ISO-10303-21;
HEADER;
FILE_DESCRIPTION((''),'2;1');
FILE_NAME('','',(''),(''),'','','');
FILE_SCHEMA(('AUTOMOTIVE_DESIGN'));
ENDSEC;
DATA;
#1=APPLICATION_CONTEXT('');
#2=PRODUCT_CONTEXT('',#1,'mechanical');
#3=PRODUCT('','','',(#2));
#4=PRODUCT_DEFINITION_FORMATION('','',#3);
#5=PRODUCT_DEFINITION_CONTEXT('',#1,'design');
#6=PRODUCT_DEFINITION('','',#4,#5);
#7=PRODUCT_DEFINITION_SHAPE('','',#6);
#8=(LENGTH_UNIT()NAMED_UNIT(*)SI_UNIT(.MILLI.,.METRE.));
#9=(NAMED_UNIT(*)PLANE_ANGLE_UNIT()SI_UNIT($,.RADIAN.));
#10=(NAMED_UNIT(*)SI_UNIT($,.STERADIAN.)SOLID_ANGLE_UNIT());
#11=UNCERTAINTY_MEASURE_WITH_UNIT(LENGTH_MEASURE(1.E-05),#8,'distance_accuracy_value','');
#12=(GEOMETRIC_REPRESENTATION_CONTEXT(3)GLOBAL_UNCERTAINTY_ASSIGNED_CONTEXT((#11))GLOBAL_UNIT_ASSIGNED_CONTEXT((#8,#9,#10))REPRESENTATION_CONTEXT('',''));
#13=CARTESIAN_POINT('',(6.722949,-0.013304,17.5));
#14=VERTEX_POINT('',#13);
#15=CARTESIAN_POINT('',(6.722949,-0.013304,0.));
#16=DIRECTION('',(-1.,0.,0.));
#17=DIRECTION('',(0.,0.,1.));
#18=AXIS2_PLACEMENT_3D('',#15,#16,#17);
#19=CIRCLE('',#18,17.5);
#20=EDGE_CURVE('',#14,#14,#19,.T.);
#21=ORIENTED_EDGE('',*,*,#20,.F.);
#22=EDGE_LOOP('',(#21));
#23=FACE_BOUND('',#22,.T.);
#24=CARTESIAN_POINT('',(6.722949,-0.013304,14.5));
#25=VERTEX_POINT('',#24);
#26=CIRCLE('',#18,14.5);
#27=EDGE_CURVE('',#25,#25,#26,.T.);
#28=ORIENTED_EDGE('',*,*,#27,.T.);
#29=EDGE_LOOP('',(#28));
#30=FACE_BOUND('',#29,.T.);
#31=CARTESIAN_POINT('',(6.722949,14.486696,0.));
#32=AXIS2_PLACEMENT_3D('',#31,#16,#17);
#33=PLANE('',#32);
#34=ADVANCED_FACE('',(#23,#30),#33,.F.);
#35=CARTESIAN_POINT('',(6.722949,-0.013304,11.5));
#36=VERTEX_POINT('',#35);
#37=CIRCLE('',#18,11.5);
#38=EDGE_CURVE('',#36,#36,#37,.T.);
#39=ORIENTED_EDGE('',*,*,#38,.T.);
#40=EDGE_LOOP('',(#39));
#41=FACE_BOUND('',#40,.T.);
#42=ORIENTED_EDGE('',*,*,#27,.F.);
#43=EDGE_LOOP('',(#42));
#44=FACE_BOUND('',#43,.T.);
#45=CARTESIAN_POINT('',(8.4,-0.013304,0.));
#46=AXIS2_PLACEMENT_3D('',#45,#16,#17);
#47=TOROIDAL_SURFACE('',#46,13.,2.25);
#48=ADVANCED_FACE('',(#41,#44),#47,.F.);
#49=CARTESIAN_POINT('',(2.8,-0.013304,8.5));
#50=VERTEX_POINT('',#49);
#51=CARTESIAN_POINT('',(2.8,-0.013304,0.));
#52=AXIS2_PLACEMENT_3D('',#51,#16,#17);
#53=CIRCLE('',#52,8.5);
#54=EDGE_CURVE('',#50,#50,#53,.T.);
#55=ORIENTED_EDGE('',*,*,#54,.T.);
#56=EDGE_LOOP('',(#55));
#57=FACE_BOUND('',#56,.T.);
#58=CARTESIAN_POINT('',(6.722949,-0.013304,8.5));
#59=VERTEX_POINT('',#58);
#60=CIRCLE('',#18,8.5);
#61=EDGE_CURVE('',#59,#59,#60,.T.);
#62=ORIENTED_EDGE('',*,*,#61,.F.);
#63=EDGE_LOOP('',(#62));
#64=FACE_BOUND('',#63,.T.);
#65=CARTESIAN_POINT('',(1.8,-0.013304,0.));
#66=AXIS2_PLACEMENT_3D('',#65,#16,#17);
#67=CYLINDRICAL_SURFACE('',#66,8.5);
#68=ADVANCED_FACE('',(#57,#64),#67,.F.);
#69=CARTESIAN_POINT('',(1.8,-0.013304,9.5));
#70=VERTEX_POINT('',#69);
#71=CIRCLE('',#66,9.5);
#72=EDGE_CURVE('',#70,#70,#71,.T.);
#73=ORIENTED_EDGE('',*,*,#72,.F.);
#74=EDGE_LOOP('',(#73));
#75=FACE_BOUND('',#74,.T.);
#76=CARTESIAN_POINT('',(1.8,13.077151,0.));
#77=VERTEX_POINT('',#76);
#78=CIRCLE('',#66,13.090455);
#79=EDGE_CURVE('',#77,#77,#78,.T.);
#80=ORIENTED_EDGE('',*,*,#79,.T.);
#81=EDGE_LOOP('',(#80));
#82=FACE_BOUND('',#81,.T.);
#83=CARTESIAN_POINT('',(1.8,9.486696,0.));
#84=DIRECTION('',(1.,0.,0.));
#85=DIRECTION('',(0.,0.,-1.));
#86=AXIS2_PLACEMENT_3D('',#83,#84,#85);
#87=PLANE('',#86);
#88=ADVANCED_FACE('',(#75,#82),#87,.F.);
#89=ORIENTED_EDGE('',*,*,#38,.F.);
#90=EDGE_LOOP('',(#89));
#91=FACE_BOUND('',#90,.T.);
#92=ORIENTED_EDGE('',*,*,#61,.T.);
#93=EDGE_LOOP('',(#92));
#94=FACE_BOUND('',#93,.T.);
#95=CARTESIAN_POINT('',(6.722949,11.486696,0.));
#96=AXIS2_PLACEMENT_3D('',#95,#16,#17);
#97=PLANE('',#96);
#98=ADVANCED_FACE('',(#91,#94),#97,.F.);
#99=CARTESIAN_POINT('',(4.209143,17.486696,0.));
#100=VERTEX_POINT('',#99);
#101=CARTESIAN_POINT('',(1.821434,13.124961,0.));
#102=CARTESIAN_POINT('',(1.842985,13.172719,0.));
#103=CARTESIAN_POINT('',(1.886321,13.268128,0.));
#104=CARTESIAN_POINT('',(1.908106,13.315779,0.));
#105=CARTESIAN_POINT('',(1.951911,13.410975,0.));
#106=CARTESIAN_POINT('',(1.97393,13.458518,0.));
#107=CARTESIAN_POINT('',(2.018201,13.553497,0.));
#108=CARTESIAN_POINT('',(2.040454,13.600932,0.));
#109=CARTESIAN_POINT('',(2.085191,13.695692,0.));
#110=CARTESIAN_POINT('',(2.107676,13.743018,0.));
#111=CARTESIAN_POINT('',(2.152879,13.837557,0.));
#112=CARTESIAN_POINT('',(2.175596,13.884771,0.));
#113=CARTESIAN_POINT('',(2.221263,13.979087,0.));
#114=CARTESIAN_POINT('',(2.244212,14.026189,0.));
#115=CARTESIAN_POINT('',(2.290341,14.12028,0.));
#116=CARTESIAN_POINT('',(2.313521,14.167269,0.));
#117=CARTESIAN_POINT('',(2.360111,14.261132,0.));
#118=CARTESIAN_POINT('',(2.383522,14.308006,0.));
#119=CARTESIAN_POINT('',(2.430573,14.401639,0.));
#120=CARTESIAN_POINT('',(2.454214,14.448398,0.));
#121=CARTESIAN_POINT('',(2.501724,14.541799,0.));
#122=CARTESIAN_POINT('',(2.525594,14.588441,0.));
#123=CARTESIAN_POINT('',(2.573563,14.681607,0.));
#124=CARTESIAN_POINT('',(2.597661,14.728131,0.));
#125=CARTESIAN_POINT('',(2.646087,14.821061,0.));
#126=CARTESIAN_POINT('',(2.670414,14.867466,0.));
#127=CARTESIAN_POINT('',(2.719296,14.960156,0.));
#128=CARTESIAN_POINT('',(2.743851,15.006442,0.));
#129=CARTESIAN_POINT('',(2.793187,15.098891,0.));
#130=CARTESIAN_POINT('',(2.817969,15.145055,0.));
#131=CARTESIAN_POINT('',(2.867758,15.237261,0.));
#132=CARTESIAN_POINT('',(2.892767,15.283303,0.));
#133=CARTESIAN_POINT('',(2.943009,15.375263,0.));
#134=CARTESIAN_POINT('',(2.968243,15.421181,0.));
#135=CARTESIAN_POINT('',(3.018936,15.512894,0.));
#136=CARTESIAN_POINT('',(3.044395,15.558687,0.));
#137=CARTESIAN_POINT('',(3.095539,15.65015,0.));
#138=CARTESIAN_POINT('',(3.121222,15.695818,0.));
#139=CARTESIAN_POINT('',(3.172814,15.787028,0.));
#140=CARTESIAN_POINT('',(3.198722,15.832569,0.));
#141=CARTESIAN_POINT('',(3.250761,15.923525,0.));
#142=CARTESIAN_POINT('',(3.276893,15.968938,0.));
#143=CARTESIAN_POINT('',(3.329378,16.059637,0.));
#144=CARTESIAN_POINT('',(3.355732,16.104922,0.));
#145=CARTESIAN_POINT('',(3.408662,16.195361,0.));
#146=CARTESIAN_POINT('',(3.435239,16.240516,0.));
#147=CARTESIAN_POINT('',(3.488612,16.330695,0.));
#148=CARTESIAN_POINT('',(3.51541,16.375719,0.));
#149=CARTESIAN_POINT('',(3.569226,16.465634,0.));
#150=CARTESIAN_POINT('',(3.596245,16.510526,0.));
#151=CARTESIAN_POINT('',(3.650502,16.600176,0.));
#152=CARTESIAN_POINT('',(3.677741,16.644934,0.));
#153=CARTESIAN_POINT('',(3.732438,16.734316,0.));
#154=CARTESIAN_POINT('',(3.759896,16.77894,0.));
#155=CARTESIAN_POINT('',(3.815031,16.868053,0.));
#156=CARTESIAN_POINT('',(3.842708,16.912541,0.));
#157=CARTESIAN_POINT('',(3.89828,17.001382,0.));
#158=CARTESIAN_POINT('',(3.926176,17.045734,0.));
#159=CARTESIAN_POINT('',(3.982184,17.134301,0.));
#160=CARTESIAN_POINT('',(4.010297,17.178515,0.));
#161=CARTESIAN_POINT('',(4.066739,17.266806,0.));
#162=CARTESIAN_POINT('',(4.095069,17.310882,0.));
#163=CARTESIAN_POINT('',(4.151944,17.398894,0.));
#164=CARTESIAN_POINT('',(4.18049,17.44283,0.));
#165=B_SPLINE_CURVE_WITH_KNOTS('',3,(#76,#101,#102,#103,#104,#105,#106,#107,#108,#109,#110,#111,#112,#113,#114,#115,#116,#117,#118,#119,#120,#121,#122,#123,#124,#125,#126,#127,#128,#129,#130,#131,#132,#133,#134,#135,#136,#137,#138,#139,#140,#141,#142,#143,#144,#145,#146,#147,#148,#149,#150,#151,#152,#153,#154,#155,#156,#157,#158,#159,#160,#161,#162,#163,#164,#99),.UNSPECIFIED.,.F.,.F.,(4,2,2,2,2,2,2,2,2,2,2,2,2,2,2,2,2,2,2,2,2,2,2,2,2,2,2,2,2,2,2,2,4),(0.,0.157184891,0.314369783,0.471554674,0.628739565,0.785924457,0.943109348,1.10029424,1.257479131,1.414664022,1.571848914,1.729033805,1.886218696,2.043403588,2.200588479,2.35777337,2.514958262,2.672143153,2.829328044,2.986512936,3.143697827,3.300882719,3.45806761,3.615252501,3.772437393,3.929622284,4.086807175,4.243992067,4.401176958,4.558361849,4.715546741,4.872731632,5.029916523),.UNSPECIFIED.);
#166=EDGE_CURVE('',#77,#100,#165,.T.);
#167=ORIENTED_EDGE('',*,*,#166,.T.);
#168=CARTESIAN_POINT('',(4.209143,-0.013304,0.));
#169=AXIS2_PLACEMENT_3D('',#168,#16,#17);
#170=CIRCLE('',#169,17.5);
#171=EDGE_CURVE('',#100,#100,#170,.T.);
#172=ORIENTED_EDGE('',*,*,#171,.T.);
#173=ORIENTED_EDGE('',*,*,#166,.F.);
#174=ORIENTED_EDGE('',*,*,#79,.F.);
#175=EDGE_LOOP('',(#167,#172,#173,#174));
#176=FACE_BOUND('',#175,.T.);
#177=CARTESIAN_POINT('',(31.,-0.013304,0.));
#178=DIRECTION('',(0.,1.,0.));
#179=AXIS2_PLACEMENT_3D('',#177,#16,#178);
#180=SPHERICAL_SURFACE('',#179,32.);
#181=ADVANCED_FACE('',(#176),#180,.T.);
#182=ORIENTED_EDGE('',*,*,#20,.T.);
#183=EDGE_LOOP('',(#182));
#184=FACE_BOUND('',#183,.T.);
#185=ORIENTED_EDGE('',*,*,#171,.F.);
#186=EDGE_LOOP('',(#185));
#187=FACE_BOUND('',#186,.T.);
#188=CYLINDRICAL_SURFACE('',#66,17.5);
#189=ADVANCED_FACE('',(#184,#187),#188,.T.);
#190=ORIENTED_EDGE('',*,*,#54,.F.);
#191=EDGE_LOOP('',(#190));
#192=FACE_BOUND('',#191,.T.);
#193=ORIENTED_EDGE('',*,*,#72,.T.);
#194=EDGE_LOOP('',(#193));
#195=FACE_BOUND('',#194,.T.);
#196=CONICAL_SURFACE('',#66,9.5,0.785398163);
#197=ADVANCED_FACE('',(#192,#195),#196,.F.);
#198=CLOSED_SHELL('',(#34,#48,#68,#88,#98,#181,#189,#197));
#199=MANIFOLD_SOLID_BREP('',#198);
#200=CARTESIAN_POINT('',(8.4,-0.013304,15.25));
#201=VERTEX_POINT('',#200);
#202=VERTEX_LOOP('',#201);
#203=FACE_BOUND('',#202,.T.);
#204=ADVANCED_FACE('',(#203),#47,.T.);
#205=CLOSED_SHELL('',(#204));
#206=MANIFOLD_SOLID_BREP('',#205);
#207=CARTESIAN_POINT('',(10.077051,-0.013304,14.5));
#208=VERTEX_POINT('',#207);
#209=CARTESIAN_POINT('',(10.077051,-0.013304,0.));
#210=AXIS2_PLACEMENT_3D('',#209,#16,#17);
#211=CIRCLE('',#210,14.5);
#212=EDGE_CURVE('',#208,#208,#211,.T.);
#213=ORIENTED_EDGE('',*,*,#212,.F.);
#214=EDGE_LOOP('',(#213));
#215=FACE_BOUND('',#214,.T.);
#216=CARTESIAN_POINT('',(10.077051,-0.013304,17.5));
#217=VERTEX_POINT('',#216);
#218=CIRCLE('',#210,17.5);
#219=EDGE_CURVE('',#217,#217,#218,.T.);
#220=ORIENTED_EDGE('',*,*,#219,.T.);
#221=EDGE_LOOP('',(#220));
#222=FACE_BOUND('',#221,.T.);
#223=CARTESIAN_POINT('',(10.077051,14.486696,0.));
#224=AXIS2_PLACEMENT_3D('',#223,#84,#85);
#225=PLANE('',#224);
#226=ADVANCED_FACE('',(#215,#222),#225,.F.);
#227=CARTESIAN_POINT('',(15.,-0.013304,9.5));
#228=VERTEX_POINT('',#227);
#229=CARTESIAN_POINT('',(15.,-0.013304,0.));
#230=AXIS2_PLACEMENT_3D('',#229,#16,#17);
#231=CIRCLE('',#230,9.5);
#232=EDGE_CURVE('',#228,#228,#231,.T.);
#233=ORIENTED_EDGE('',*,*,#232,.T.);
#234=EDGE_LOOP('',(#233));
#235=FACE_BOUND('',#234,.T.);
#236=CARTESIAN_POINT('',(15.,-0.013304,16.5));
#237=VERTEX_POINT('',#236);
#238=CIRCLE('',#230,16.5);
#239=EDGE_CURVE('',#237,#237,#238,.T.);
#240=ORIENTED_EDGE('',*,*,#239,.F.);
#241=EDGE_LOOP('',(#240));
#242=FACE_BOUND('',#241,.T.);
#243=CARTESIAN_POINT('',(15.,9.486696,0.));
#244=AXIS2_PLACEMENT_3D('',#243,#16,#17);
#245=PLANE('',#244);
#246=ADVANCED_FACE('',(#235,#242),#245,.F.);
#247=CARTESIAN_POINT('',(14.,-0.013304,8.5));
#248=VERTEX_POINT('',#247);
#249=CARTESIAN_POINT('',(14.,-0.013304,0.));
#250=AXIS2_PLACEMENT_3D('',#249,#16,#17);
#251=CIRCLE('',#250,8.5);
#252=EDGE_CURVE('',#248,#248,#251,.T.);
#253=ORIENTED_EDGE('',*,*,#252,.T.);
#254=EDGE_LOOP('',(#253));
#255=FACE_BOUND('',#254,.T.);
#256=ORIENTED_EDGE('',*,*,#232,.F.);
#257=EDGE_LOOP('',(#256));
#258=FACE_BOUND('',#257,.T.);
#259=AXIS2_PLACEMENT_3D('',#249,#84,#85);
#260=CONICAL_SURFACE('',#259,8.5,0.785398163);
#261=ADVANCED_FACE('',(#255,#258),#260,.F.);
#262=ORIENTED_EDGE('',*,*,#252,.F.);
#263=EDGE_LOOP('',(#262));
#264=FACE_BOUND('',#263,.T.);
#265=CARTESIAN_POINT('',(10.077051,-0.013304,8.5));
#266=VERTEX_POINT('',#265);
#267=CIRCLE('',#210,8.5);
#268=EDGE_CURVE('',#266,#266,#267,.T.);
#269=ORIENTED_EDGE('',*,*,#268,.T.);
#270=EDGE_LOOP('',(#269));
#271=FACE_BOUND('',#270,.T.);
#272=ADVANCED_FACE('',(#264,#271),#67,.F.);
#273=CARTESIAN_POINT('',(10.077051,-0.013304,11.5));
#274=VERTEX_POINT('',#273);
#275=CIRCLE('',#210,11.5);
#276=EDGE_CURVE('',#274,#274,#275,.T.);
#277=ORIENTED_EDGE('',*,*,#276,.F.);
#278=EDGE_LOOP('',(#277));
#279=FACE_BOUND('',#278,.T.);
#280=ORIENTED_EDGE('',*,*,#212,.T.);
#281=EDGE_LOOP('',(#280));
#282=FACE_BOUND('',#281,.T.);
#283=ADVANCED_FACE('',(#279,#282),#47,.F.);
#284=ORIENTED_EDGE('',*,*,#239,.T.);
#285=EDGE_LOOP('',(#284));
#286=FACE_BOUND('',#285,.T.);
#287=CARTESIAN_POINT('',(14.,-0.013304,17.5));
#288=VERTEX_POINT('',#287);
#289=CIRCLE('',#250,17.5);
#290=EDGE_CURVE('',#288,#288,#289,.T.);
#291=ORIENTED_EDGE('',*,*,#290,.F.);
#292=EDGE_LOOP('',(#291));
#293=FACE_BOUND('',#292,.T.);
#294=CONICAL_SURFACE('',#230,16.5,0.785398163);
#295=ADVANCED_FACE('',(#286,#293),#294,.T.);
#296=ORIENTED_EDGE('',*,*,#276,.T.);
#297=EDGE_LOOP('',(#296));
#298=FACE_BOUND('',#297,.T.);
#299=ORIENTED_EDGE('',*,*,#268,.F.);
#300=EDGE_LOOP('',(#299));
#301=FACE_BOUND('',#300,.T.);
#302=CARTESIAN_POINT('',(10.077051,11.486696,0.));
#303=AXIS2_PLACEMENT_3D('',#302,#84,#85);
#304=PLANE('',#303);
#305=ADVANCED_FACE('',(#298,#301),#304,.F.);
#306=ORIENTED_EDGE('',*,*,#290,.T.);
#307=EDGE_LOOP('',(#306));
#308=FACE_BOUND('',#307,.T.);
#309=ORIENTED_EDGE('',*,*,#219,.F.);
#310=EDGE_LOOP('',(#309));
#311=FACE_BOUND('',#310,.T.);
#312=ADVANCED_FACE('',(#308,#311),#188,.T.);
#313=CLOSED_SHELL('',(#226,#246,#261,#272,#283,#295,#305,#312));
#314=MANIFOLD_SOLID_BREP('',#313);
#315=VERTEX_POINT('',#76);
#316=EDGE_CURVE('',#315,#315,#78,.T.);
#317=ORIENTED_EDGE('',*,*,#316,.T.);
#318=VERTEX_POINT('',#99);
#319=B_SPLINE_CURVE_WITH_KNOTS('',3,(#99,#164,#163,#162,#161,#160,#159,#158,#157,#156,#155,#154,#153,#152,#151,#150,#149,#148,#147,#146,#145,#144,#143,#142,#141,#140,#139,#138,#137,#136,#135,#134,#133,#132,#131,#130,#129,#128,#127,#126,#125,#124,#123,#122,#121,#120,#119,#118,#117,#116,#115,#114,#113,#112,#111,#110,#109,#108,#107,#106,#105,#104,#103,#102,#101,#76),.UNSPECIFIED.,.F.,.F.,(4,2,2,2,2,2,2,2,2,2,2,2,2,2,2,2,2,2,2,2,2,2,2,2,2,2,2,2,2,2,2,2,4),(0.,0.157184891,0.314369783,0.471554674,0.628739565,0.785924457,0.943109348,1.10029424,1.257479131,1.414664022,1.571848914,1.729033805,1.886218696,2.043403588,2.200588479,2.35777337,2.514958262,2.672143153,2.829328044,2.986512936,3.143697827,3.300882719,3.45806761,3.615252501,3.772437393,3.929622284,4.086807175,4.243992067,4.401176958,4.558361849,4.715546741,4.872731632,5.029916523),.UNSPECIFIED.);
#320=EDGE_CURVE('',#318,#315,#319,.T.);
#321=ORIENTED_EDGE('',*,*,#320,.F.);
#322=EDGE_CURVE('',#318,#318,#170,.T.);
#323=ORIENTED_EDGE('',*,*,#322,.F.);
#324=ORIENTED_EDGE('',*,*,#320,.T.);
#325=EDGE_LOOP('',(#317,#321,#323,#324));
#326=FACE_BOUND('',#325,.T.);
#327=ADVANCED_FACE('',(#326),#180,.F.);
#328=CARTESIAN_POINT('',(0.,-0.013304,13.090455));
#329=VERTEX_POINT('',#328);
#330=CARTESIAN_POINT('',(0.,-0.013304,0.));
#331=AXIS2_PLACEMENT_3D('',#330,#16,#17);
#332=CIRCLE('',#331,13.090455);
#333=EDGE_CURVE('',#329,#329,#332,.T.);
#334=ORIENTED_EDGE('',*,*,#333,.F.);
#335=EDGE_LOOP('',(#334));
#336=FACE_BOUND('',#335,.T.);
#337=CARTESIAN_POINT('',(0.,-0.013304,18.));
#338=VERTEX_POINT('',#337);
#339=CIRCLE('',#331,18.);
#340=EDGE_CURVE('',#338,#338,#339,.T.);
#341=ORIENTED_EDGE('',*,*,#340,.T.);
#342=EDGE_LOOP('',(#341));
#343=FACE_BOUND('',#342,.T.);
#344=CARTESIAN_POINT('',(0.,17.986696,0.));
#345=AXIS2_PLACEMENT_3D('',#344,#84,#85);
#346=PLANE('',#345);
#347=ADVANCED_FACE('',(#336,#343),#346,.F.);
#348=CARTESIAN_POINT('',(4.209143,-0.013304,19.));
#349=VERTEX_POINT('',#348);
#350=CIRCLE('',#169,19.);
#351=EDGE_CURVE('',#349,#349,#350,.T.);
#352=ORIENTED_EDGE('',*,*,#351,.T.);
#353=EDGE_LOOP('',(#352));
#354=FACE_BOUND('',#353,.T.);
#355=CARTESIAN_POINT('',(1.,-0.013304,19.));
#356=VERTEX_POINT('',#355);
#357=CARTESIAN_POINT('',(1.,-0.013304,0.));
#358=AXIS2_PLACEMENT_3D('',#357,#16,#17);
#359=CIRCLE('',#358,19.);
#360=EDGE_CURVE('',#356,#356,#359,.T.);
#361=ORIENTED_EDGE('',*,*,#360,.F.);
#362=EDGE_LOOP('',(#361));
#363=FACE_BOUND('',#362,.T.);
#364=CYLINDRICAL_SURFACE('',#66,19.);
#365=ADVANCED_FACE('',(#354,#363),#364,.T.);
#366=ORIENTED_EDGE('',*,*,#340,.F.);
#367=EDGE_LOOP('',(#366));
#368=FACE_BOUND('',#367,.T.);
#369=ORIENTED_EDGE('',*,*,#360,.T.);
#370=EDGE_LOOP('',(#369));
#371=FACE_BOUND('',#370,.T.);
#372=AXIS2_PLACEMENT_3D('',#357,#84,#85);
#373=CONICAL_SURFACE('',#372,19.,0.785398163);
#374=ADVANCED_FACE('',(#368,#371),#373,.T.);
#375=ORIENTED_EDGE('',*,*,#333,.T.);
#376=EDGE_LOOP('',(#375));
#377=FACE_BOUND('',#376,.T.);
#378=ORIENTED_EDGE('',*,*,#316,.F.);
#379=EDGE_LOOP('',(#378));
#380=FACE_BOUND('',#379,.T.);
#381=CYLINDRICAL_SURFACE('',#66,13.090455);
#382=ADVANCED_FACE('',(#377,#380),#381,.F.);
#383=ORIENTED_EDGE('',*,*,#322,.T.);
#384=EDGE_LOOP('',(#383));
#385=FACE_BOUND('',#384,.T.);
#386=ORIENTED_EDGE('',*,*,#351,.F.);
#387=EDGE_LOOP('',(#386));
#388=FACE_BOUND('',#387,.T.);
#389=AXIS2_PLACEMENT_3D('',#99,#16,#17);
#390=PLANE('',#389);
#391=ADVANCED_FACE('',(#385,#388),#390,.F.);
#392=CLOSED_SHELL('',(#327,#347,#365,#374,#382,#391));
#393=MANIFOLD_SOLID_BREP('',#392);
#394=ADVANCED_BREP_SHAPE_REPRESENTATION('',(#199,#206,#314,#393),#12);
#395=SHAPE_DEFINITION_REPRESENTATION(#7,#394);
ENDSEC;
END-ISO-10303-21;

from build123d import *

# Parameters (mm, degrees)
REVOLVE_3_OUTLINE_R = 2.25


# Read off the part's stored shape, not the designer's step: Повернуть3
with BuildPart() as part:
    # Эскиз3 → Повернуть1 (revolve)
    with BuildSketch(Plane.XY, mode=Mode.PRIVATE) as revolve_1_sk:
        with BuildLine():
            Line((4.209143351, 17.486695989), (4.209143351, 18.986695989))
            Line((4.209143351, 18.986695989), (1, 18.986695989))
            Line((1, 18.986695989), (0, 17.986695989))
            Line((0, 17.986695989), (0, 13.077150527))
            Line((0, 13.077150527), (1.8, 13.077150527))
            ThreePointArc((1.8, 13.077150527), (2.917887724, 15.329282802), (4.209143351, 17.486695989))
        make_face()
    revolve(revolve_1_sk.sketch.rotate(Axis((1.8, -0.013304011, 0), (1, 0, 0)), 90), axis=Axis((1.8, -0.013304011, 0), (1, 0, 0)))


with BuildPart() as body_2:
    # Эскиз5 → Повернуть2 (revolve)
    with BuildSketch(Plane.XY, mode=Mode.PRIVATE) as revolve_2_sk:
        with BuildLine():
            Line((4.209143351, 17.486695989), (6.722949017, 17.486695989))
            Line((6.722949017, 17.486695989), (6.722949017, 14.486695989))
            ThreePointArc((6.722949017, 14.486695989), (6.15, 12.986695989), (6.722949017, 11.486695989))
            Line((6.722949017, 11.486695989), (6.722949017, 8.486695989))
            Line((6.722949017, 8.486695989), (2.8, 8.486695989))
            Line((2.8, 8.486695989), (1.8, 9.486695989))
            Line((1.8, 9.486695989), (1.8, 13.077150527))
            ThreePointArc((1.8, 13.077150527), (2.917887724, 15.329282802), (4.209143351, 17.486695989))
        make_face()
    revolve(revolve_2_sk.sketch.rotate(Axis((1.8, -0.013304011, 0), (1, 0, 0)), 90), axis=Axis((1.8, -0.013304011, 0), (1, 0, 0)))


with BuildPart() as body_3:
    # Повернуть3 outline → Повернуть3 (revolve)
    with BuildSketch(Plane(origin=(0, -0.013304011, 0), x_dir=(0, 1, 0), z_dir=(0, 0, -1))):
        with Locations((13, 8.4)):
            Circle(REVOLVE_3_OUTLINE_R)
    revolve(axis=Axis((0, -0.013304011, 0), (1, 0, 0)))


with BuildPart() as body_4:
    # Эскиз7 → Повернуть4 (revolve)
    with BuildSketch(Plane.XY, mode=Mode.PRIVATE) as revolve_4_sk:
        with BuildLine():
            Line((10.077050983, 11.486695989), (10.077050983, 8.486695989))
            Line((10.077050983, 8.486695989), (14, 8.486695989))
            Line((14, 8.486695989), (15, 9.486695989))
            Line((15, 9.486695989), (15, 16.486695989))
            Line((15, 16.486695989), (14, 17.486695989))
            Line((14, 17.486695989), (10.077050983, 17.486695989))
            Line((10.077050983, 17.486695989), (10.077050983, 14.486695989))
            ThreePointArc((10.077050983, 14.486695989), (10.65, 12.986695989), (10.077050983, 11.486695989))
        make_face()
    revolve(revolve_4_sk.sketch.rotate(Axis((15, -0.013304011, 0), (1, 0, 0)), 90), axis=Axis((15, -0.013304011, 0), (1, 0, 0)))


solid = Compound([part.part, body_2.part, body_3.part, body_4.part])
